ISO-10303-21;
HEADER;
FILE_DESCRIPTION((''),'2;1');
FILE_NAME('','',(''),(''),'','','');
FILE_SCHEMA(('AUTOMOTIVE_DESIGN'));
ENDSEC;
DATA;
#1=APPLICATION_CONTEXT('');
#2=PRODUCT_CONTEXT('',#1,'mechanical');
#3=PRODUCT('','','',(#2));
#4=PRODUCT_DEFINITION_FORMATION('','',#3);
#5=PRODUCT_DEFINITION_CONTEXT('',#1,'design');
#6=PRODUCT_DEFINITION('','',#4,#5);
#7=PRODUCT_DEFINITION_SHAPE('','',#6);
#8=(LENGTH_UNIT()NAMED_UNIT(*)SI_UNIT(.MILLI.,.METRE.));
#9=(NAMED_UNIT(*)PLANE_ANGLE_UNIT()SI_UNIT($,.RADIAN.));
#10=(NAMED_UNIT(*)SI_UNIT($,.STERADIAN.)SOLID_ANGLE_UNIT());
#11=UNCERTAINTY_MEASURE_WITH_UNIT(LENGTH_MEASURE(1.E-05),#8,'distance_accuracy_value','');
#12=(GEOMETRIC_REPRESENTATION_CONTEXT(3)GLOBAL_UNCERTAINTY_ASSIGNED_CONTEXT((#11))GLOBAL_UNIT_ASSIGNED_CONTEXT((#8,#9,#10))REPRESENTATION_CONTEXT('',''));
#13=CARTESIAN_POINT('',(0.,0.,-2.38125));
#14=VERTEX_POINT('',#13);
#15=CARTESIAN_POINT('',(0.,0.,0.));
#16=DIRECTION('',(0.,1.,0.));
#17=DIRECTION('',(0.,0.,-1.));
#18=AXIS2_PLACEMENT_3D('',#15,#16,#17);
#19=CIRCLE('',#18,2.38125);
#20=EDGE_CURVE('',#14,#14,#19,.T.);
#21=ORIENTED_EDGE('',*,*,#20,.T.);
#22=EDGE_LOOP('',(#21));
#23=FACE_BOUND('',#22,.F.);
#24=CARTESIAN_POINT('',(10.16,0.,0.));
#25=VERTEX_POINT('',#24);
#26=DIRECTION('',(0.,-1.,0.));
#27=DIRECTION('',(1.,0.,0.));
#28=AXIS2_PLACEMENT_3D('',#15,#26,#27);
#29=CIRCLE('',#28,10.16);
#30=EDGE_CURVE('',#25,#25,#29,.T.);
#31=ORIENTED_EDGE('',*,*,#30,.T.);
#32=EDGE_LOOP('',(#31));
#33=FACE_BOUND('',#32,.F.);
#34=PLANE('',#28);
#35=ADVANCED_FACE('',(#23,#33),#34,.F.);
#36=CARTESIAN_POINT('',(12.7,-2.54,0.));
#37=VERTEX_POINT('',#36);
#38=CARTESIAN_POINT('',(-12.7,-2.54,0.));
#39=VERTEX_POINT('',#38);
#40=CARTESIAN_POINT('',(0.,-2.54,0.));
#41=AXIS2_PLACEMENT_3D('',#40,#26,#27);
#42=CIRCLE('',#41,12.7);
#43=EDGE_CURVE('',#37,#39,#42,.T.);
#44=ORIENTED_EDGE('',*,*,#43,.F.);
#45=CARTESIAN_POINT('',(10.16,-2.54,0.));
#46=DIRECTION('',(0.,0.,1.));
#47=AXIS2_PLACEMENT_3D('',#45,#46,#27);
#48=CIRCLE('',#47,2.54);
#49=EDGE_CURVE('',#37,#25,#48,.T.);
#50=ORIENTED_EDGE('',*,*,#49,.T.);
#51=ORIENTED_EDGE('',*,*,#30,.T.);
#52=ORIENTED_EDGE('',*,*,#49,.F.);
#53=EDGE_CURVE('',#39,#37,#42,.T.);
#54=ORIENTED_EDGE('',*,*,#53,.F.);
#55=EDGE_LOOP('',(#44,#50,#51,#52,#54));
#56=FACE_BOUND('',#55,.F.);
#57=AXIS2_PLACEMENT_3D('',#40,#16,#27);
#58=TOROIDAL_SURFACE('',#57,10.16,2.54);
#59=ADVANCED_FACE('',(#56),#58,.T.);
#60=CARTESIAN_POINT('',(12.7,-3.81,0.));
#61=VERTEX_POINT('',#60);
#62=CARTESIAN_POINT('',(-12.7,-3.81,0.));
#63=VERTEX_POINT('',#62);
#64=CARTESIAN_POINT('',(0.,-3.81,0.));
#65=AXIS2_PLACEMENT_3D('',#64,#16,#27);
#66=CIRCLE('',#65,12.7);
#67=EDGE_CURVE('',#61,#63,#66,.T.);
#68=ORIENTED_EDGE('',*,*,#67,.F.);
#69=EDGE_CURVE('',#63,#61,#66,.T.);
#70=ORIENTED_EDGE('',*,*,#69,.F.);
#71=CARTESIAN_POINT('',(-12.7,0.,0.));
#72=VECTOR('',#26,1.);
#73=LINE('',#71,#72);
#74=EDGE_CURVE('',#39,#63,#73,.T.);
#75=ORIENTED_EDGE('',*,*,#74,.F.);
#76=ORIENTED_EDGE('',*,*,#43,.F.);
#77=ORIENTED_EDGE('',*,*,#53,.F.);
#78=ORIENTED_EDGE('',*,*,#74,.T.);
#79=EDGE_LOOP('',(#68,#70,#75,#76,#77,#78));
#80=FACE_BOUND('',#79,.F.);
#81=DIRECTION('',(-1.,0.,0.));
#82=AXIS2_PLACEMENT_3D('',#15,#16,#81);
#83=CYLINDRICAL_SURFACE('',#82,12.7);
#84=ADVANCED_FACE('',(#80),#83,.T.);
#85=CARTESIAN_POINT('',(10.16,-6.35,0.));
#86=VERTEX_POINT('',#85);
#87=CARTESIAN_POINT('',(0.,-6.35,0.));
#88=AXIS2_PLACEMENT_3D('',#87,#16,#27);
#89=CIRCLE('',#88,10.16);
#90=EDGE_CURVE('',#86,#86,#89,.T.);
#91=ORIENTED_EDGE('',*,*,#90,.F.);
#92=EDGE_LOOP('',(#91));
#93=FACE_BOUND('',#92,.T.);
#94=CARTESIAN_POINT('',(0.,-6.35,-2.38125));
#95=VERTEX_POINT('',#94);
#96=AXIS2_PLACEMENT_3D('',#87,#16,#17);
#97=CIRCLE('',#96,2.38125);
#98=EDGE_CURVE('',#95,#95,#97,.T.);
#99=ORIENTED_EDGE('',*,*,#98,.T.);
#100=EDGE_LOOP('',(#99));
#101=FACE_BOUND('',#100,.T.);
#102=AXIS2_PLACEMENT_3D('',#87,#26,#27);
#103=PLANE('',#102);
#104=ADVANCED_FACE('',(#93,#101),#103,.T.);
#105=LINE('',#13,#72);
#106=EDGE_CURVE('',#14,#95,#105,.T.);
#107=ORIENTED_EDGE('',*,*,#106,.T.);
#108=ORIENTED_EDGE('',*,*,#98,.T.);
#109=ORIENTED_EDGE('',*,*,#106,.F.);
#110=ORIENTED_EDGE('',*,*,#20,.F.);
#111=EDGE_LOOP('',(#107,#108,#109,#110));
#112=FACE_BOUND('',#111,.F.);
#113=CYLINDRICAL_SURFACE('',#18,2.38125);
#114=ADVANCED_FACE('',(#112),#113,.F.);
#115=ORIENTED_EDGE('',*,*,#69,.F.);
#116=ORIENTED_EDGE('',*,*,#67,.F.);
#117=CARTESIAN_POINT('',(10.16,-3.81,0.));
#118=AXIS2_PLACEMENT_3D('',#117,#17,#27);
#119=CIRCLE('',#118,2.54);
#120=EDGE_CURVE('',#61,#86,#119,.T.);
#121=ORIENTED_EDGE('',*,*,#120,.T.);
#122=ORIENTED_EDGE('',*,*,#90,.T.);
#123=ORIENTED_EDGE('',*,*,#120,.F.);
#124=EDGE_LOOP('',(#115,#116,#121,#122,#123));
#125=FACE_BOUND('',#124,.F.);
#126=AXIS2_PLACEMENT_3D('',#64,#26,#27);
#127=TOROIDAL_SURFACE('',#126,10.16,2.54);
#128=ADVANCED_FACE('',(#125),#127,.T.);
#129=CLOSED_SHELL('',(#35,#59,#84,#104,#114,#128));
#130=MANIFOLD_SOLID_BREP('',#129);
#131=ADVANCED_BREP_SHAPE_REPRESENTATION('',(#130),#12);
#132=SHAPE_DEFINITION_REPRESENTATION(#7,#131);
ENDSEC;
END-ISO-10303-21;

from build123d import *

# Parameters (mm, degrees)
F1_DEPTH = 6.35


# Not quite as in the source:
# - a fillet or chamfer that OpenCascade refuses, or shapes differently, is made with other operations: its cross-section is extruded or revolved along the edge and cut away or added


with BuildPart() as f1:
    # F0 (on Front) → F1 (new body)
    with BuildSketch(Plane.XZ):
        with BuildLine():
            ThreePointArc((12.7, 0), (0, 12.7), (-12.7, 0))
            ThreePointArc((-12.7, 0), (0, -12.7), (12.7, 0))
        make_face()
        with BuildLine():
            ThreePointArc((0, -2.38125), (-1.6837980227, -1.6837980227), (-2.38125, 0))
            ThreePointArc((-2.38125, 0), (0, 2.38125), (2.38125, 0))
            ThreePointArc((2.38125, 0), (1.6837980227, -1.6837980227), (0, -2.38125))
        make_face(mode=Mode.SUBTRACT)
    extrude(amount=F1_DEPTH)

    # F2: fillet of radius 2.54 on 2 edges, made by hand

    # F2_s1 → F2_t2 (revolve, cut)
    with BuildSketch(Plane.XY):
        with BuildLine():
            ThreePointArc((12.7, -3.81), (11.9560512242, -5.6060512242), (10.16, -6.35))
            Line((10.16, -6.35), (12.7, -6.35))
            Line((12.7, -6.35), (12.7, -3.81))
        make_face()
    revolve(axis=Axis((0, -6.35, 0), (0, 1, 0)), mode=Mode.SUBTRACT)

    # F2_s3 → F2_t4 (revolve, cut)
    with BuildSketch(Plane.XY):
        with BuildLine():
            ThreePointArc((12.7, -2.54), (11.9560512242, -0.7439487758), (10.16, 0))
            Line((10.16, 0), (12.7, 0))
            Line((12.7, 0), (12.7, -2.54))
        make_face()
    revolve(axis=Axis((0, 0, 0), (0, -1, 0)), mode=Mode.SUBTRACT)


solid = f1.part
